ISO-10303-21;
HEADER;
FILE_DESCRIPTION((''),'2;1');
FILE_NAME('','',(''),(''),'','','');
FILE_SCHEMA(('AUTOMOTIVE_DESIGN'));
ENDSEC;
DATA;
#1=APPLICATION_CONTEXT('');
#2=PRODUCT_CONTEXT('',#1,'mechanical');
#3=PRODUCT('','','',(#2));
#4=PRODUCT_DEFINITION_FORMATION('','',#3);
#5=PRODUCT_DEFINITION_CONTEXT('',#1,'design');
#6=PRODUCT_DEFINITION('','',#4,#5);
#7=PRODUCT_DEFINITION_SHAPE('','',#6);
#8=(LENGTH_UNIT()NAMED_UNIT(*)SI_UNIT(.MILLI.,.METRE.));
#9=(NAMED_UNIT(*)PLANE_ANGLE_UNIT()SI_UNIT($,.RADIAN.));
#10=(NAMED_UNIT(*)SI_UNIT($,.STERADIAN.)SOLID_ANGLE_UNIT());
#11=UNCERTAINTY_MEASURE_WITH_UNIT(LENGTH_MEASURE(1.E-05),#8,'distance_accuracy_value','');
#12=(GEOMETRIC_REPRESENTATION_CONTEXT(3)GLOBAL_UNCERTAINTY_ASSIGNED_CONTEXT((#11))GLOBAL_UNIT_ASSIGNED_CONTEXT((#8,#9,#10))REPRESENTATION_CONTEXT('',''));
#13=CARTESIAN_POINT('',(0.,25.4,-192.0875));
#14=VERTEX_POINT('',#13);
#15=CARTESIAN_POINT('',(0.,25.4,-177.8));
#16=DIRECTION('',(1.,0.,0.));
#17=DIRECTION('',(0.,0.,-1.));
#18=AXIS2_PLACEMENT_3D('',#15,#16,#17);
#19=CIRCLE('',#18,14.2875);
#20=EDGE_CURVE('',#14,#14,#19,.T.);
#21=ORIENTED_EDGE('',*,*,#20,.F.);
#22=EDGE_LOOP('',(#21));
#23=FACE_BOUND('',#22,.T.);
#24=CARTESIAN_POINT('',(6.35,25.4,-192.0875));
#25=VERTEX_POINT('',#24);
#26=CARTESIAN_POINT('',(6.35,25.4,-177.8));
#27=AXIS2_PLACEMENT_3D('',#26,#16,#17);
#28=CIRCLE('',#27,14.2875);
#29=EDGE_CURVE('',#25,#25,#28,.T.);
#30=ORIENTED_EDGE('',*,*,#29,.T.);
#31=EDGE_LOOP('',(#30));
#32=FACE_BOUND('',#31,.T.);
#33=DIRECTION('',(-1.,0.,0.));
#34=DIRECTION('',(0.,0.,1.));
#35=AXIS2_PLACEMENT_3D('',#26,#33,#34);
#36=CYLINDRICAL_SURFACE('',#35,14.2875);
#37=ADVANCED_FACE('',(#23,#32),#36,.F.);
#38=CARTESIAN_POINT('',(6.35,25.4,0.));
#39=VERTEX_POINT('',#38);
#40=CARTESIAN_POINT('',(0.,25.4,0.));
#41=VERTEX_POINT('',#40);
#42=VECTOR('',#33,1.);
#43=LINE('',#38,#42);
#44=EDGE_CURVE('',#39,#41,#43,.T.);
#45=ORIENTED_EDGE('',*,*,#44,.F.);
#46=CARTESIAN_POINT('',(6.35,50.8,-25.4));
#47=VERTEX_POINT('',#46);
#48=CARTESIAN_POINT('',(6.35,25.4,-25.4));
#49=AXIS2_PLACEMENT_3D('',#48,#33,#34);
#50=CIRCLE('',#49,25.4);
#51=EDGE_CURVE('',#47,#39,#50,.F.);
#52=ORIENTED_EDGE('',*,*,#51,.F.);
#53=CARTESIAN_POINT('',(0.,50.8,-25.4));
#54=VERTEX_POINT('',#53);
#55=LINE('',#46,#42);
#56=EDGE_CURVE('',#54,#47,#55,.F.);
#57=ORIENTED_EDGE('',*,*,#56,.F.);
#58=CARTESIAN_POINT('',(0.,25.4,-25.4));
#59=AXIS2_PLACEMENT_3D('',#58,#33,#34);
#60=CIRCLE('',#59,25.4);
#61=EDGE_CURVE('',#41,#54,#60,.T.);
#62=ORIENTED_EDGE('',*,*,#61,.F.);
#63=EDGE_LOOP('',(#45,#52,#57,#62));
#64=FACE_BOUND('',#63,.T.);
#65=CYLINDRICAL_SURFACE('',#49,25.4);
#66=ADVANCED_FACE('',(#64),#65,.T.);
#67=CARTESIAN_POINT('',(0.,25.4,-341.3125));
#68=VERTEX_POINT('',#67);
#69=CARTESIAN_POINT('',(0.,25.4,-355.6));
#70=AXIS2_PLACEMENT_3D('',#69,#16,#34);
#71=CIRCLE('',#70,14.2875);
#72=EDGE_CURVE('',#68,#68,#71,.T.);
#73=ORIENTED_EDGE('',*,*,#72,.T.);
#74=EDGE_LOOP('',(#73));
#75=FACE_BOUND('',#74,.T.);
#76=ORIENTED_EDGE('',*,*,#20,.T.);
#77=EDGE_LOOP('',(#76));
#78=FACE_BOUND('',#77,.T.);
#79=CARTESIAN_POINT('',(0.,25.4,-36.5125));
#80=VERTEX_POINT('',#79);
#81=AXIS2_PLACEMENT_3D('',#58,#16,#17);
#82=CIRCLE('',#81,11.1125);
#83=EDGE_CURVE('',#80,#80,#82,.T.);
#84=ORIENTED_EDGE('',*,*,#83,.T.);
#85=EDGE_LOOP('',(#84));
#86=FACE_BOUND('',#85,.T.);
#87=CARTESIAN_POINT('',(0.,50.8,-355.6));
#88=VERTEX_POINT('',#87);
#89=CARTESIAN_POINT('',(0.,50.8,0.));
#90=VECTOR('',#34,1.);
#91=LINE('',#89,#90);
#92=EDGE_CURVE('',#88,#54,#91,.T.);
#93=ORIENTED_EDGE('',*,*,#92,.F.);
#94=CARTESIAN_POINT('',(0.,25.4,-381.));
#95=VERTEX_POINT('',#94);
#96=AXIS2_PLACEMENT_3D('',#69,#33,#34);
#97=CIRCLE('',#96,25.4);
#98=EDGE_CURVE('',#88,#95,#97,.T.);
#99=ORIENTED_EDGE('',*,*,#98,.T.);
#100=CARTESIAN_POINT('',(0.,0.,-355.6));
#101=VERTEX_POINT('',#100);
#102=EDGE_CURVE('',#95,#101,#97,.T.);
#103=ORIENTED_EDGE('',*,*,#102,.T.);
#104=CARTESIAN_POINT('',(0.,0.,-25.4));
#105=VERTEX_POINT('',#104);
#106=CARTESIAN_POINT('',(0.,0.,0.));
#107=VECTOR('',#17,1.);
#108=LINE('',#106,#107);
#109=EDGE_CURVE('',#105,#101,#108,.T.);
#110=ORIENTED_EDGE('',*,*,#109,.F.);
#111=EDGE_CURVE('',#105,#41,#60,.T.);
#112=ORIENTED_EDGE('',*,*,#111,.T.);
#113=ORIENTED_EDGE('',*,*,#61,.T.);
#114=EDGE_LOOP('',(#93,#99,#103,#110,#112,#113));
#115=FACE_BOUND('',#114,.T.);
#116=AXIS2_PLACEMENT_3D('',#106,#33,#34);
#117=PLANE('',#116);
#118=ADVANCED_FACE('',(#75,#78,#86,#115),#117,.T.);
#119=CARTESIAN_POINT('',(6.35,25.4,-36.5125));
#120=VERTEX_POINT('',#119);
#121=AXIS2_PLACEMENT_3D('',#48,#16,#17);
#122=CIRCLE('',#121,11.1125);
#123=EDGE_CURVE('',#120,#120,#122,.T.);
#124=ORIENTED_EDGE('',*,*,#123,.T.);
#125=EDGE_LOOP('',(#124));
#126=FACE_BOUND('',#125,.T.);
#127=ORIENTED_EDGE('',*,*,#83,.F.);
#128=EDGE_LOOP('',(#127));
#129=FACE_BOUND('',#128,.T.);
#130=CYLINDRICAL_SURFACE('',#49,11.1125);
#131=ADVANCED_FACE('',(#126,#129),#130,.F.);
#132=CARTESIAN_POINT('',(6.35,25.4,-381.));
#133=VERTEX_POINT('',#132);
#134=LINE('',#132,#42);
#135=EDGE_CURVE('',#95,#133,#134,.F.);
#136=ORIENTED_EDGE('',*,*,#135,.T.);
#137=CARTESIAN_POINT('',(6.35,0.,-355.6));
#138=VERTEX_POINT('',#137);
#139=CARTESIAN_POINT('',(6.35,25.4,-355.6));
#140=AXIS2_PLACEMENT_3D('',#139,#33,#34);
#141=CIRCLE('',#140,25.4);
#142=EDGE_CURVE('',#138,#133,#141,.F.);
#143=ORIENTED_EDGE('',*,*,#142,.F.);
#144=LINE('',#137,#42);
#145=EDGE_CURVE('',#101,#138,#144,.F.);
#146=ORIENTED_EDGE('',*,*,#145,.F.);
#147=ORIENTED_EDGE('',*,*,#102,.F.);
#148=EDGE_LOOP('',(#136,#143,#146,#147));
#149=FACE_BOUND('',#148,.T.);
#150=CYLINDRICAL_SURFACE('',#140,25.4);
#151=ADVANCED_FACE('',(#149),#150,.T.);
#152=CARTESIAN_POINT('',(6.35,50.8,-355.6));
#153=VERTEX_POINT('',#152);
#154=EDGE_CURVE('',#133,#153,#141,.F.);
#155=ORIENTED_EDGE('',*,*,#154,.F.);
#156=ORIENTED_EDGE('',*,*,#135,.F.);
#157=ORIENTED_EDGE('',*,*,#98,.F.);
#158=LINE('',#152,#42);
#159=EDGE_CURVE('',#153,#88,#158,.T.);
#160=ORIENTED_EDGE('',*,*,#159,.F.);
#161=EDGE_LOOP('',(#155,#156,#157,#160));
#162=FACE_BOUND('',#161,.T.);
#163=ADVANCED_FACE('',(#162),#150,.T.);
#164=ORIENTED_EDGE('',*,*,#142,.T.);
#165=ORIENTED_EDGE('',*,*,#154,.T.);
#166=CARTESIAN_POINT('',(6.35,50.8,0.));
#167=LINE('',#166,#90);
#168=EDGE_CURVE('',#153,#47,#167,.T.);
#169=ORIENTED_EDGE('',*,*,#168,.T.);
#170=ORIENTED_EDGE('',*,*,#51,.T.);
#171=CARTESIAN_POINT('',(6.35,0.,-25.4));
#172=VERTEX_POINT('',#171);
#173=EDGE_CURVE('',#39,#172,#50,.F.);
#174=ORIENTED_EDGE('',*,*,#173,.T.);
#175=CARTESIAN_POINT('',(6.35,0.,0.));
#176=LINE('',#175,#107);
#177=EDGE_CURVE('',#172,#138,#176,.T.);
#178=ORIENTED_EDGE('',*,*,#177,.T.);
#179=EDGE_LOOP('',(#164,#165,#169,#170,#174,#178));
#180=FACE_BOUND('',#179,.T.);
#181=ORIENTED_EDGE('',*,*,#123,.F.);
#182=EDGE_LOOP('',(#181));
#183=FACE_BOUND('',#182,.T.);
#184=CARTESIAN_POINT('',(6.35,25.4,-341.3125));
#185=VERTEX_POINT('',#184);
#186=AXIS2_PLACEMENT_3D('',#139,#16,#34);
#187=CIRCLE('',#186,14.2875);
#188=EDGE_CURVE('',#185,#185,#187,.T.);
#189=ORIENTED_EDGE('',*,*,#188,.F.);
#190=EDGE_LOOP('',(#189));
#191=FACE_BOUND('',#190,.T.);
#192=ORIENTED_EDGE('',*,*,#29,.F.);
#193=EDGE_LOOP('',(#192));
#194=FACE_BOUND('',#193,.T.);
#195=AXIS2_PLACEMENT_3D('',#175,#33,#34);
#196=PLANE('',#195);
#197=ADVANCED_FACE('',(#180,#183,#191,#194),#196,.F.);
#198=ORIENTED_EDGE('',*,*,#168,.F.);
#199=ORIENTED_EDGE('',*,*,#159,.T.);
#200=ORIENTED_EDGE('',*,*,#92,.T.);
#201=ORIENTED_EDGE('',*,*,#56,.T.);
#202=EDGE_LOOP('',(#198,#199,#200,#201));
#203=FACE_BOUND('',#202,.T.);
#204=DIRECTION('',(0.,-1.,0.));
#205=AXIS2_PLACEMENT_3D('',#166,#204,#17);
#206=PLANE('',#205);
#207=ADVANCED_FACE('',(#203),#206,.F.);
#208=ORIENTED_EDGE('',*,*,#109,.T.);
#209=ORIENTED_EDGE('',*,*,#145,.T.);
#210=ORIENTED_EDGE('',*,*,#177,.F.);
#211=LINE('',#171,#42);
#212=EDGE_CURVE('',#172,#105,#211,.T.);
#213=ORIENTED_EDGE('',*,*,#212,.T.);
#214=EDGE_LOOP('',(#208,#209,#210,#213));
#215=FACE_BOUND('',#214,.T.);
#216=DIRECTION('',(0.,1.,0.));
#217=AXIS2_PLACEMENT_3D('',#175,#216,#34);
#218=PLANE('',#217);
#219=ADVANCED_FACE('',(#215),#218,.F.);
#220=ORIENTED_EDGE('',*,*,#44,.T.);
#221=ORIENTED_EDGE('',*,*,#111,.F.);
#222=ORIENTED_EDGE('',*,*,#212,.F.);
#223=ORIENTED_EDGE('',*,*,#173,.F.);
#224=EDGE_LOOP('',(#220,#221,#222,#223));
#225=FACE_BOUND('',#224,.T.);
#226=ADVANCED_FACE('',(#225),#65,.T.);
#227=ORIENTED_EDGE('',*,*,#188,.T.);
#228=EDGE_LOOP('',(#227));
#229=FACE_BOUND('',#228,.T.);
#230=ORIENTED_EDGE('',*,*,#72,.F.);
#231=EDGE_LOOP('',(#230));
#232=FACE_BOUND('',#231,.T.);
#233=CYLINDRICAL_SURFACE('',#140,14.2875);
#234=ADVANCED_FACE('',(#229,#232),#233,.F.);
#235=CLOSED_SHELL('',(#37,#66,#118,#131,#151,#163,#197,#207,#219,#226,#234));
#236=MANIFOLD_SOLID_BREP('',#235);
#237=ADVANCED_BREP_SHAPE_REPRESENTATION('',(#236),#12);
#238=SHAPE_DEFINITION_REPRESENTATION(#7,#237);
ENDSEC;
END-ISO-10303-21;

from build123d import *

# Parameters (mm, degrees)
SKETCH1_W           = 381
SKETCH1_H           = 50.8
SKETCH1_R           = 11.1125
SKETCH1_R_2         = 14.2875
BOSS_EXTRUDE1_DEPTH = 6.35
FILLET3_R           = 25.4


with BuildPart() as part:
    # Sketch1 → Boss-Extrude1 (new body)
    with BuildSketch(Plane(origin=(0, 0, 0), x_dir=(0, 0, -1), z_dir=(1, 0, 0))):
        with Locations((190.5, 25.4)):
            Rectangle(SKETCH1_W, SKETCH1_H)
        with Locations((25.4, 25.4)):
            Circle(SKETCH1_R, mode=Mode.SUBTRACT)
        with Locations(Location((355.6, 25.4, 0), (0, 0, 180))):
            Circle(SKETCH1_R_2, mode=Mode.SUBTRACT)
        with Locations((177.8, 25.4)):
            Circle(SKETCH1_R_2, mode=Mode.SUBTRACT)
    extrude(amount=BOSS_EXTRUDE1_DEPTH)

    # Fillet3
    fillet3_edges = [part.edges().sort_by_distance(p)[0] for p in [
        (3.175, 0, 0),
        (3.175, 50.8, 0),
        (3.175, 0, -381),
        (3.175, 50.8, -381),
    ]]
    fillet(fillet3_edges, radius=FILLET3_R - 0.0001)  # a hair under: the kernel refuses the full size


solid = part.part
